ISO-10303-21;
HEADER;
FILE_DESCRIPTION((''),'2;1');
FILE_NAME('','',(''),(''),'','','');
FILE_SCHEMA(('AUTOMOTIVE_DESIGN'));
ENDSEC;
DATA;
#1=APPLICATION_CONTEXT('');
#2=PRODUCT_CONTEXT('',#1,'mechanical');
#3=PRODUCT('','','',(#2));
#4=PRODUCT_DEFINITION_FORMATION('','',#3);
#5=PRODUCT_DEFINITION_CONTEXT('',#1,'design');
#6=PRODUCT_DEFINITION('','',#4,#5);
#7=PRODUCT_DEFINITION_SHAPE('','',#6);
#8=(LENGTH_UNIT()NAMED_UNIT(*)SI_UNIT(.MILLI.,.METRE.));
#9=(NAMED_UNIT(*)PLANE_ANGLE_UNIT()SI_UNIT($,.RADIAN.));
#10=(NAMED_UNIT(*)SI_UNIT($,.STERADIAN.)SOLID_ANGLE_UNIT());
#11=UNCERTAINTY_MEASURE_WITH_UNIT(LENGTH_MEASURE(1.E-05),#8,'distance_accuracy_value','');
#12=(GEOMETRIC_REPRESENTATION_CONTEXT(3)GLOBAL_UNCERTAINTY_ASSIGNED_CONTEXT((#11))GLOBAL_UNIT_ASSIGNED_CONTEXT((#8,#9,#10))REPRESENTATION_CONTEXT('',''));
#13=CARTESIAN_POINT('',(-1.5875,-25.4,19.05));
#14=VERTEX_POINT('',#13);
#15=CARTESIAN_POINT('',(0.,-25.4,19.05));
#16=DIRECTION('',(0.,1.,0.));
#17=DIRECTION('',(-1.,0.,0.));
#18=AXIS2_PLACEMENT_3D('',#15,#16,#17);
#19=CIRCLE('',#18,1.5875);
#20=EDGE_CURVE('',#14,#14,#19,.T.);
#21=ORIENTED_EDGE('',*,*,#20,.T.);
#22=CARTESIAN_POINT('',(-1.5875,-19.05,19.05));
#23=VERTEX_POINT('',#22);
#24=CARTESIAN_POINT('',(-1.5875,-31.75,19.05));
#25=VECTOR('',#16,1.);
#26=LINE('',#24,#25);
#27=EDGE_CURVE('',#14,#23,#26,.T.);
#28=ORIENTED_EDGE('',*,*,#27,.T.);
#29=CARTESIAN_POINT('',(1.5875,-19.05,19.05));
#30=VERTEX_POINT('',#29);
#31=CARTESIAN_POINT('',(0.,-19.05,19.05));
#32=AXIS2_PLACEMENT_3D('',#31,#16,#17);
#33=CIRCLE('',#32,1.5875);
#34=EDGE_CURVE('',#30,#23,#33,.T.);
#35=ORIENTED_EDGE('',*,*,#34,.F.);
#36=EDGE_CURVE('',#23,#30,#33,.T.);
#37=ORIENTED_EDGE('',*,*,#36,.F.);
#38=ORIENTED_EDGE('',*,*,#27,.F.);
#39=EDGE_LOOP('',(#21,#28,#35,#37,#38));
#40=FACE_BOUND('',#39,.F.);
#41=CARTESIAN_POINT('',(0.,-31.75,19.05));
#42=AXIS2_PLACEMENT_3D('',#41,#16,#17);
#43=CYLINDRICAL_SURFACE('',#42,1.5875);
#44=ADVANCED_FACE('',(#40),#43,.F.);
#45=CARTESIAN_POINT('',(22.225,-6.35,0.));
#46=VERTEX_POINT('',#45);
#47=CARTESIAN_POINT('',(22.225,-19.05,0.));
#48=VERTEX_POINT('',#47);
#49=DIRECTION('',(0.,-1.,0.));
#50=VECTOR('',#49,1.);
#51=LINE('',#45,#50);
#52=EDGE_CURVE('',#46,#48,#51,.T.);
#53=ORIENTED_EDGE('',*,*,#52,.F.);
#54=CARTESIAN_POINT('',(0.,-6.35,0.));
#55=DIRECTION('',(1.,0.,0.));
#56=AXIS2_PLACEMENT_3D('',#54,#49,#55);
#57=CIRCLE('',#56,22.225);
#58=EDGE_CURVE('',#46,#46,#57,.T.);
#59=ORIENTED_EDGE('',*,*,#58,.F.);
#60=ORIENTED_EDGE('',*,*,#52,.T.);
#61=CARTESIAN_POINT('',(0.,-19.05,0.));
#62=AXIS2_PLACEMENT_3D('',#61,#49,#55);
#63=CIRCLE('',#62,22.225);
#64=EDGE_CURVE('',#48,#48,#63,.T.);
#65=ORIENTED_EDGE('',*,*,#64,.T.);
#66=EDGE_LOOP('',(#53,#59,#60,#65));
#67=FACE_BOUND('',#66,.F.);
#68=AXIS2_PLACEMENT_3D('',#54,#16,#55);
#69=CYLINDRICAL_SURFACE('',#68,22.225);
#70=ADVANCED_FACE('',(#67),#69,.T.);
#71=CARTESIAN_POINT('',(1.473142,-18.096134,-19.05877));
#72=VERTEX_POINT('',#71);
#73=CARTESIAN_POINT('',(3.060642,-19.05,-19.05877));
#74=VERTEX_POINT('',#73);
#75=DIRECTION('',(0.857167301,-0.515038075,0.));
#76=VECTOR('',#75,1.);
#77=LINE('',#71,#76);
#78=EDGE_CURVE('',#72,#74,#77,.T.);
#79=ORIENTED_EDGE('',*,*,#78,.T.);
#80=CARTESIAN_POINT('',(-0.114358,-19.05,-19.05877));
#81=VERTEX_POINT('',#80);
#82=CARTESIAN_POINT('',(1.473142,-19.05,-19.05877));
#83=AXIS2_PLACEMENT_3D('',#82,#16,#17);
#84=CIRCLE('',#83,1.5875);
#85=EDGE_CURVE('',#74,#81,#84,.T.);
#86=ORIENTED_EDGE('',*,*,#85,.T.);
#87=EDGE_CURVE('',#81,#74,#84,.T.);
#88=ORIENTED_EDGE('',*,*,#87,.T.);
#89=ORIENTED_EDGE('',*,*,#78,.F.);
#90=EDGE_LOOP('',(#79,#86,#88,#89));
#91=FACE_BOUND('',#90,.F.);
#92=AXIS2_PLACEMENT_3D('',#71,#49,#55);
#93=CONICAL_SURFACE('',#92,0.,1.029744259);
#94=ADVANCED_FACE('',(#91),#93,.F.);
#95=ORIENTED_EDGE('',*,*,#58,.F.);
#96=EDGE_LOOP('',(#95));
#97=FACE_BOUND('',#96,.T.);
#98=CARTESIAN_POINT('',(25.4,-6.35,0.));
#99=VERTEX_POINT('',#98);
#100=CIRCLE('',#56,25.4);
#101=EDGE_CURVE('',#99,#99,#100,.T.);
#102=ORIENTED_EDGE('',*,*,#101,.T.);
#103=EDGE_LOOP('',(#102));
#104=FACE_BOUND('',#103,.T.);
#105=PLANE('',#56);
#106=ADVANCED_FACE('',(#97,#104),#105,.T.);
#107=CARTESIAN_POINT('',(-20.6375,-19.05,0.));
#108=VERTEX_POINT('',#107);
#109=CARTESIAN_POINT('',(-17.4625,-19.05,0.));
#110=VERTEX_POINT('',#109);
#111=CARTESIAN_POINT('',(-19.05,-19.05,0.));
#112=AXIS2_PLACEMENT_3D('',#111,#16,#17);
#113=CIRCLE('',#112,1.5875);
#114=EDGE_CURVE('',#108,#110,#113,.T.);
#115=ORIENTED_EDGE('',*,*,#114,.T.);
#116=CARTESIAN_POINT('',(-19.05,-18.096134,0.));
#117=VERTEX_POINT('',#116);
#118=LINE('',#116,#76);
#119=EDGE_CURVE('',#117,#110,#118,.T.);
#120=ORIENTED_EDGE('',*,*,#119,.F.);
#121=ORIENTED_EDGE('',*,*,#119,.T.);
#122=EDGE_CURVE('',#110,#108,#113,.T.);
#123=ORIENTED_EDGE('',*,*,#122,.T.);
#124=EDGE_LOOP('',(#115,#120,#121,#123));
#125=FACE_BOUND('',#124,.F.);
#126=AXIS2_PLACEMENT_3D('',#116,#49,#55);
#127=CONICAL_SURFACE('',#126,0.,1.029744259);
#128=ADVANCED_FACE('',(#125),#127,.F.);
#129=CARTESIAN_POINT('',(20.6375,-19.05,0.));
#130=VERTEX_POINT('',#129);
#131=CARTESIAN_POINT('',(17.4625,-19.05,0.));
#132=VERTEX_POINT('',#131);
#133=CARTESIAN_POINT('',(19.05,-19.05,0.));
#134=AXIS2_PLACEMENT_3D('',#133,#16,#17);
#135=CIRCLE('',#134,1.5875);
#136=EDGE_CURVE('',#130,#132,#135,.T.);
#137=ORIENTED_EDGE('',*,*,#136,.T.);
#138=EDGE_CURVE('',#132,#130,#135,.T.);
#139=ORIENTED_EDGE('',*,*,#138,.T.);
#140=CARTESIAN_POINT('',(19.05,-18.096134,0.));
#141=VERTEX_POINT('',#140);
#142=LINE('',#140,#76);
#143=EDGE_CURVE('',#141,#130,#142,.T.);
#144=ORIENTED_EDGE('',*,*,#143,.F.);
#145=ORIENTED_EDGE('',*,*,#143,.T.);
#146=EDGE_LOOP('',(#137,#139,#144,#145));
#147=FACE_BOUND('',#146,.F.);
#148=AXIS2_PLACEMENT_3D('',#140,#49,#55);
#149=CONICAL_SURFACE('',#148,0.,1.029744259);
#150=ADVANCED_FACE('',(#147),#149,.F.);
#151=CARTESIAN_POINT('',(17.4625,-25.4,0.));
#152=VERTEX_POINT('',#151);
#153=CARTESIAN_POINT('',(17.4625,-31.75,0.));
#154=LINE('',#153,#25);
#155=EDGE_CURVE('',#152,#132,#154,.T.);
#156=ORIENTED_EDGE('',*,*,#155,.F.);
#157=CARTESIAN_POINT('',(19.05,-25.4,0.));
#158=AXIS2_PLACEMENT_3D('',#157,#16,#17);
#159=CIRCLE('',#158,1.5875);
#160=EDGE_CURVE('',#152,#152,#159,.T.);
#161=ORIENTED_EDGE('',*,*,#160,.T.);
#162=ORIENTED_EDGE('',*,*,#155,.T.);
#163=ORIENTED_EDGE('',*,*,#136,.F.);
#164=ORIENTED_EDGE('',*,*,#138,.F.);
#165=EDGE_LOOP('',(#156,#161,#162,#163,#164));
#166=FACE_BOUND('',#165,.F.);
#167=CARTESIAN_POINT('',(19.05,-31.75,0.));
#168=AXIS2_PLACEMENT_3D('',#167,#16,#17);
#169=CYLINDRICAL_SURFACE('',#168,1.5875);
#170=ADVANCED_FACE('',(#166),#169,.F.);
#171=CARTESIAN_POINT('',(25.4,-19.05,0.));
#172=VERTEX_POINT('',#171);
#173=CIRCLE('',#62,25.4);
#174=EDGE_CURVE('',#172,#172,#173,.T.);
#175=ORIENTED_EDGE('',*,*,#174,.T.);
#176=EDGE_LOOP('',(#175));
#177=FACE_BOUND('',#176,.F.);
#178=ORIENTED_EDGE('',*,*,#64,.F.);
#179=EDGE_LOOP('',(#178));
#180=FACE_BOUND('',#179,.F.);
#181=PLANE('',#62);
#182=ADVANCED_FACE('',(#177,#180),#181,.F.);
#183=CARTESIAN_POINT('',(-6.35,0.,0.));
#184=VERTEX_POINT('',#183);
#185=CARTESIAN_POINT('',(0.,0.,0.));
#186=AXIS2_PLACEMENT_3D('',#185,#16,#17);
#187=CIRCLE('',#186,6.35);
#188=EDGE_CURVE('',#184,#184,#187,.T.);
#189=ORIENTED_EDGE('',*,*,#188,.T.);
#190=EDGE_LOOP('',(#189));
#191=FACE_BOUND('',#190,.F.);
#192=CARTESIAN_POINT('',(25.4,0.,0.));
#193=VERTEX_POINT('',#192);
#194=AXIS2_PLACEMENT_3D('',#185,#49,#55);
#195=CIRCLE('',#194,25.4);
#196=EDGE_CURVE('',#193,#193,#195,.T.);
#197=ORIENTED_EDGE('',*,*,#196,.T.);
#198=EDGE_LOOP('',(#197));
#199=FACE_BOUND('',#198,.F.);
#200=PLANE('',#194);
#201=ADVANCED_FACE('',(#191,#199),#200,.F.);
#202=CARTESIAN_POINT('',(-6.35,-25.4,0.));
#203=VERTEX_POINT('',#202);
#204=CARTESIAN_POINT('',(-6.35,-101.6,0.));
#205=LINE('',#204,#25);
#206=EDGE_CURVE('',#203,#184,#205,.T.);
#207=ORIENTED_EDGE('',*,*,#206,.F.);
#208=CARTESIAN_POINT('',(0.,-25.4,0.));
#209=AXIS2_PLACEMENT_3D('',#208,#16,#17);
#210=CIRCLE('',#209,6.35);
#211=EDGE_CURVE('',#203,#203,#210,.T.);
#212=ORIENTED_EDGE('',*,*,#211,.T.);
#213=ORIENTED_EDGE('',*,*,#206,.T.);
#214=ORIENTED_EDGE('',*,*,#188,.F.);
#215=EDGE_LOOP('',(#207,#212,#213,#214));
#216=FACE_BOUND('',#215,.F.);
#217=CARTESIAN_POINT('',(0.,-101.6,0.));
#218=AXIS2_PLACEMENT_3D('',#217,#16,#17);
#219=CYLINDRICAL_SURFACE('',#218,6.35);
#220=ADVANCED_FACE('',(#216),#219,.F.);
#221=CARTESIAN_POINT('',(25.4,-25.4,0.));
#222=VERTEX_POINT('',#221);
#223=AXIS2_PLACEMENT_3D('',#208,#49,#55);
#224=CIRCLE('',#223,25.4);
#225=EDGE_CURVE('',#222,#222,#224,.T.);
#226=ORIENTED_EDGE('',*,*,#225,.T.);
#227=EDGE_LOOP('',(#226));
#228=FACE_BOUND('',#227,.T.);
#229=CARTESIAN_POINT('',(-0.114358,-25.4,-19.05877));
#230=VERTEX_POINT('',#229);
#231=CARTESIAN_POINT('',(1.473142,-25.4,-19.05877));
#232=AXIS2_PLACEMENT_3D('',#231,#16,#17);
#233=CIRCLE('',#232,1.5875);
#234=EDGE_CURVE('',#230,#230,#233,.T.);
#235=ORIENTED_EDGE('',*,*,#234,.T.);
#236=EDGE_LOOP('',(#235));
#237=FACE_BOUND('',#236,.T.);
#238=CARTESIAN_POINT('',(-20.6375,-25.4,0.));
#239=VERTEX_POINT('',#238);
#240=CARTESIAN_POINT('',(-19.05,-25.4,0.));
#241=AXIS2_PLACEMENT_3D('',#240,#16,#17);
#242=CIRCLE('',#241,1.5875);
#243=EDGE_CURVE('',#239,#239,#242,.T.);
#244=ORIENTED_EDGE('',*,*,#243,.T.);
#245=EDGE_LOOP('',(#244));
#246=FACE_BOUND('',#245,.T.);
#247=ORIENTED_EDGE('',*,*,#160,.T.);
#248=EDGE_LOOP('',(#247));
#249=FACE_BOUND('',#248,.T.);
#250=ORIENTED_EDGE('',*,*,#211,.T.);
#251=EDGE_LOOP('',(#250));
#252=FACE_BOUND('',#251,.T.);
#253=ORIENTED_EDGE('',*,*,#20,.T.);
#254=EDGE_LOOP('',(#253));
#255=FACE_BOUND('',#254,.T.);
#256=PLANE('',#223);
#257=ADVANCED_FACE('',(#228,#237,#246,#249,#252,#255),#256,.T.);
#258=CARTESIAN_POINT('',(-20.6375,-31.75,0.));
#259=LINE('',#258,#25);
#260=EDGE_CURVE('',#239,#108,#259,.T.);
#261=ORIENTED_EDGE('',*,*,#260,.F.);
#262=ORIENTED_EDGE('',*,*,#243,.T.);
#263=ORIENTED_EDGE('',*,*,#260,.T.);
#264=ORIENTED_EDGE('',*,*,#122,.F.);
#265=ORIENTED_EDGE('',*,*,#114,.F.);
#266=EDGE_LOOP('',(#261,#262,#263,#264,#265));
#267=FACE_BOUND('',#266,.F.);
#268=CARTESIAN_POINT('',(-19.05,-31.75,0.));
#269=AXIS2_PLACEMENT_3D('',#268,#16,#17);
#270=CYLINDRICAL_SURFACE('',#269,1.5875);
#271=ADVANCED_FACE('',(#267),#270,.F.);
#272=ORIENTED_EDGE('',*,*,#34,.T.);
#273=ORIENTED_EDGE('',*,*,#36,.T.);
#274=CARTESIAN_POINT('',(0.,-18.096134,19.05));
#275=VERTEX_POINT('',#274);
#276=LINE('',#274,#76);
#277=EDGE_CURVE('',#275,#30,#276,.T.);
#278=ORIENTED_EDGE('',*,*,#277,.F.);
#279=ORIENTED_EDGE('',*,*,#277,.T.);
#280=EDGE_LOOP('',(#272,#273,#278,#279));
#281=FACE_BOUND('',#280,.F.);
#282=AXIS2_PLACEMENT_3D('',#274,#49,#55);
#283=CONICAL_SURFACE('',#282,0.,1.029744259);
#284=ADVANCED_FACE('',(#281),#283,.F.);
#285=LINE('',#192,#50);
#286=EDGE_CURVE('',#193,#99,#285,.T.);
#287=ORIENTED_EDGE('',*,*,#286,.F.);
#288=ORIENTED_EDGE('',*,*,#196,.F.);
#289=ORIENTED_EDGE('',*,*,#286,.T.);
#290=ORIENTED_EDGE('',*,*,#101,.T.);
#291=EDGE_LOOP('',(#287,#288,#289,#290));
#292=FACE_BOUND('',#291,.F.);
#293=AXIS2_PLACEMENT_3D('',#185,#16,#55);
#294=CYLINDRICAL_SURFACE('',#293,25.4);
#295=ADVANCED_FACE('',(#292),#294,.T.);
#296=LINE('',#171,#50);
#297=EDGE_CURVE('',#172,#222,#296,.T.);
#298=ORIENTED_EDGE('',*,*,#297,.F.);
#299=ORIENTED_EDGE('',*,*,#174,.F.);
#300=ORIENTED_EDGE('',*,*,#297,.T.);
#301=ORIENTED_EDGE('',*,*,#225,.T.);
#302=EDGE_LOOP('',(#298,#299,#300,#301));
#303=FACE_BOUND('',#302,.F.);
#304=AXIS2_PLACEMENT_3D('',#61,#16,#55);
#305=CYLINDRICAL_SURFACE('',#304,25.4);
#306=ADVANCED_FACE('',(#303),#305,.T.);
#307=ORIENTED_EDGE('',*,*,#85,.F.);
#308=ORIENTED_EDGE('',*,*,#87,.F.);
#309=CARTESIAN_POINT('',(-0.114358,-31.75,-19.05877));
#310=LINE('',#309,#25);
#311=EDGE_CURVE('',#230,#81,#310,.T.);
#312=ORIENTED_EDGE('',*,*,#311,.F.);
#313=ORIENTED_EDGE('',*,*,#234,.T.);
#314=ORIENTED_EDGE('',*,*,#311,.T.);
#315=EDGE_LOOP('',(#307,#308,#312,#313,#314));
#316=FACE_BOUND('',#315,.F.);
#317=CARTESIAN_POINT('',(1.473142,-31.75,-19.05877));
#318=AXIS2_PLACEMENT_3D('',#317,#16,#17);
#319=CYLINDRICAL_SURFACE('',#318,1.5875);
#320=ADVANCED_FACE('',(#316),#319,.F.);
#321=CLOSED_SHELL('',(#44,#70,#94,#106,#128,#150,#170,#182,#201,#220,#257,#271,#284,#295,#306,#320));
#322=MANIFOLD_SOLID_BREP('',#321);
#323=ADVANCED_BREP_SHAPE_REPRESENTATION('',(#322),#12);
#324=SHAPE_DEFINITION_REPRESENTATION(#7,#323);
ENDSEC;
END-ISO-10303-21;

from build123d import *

# Parameters (mm, degrees)
F0_R      = 25.4
F1_DEPTH  = 6.35
F2_R      = 22.225
F3_DEPTH  = 12.7
F4_R      = 25.4
F5_DEPTH  = 6.35
F6_R      = 1.5875
F6_R_2    = 6.35
F7_DEPTH  = 89
F9_D      = 12.7
F11_D     = 3.175
F11_DEPTH = 6.35
F11_TIP   = 0.9538662327
F13_D     = 3.175
F13_DEPTH = 6.35
F13_TIP   = 0.9538662327
F15_D     = 3.175
F15_DEPTH = 6.35
F15_TIP   = 0.9538662327
F17_D     = 3.175
F17_DEPTH = 6.35
F17_TIP   = 0.9538662327


# Not quite as in the source:
# - an extrude ends at something that could not be found from the text; its depth is read off the source's solid


with BuildPart() as f1:
    # F0 (on Front) → F1 (new body)
    with BuildSketch(Plane.XZ):
        Circle(F0_R)
    extrude(amount=F1_DEPTH)

    # F2 (on face) → F3 (join)
    with BuildSketch(Plane.XZ.offset(6.35)):
        Circle(F2_R)
    extrude(amount=F3_DEPTH)

    # F4 (on face) → F5 (join)
    with BuildSketch(Plane.XZ.offset(19.05)):
        Circle(F4_R)
    extrude(amount=F5_DEPTH)

    # F6 (on face) → F7 (cut, through all)
    with BuildSketch(Plane.XZ.offset(25.4)):
        with Locations((0, -20.6375)):
            Circle(F6_R)
        with Locations((20.6375, 0)):
            Circle(F6_R)
        with Locations((0, 20.6375)):
            Circle(F6_R)
        with Locations((-20.6375, 0)):
            Circle(F6_R)
        Circle(F6_R_2)
    extrude(amount=F7_DEPTH, mode=Mode.SUBTRACT)

    # F9 (through all)
    with Locations(Plane.XZ.offset(25.4)):
        with Locations((0, 0)):
            Hole(F9_D / 2)

    # F11
    with Locations(Plane.XZ.offset(25.4)):
        with Locations((19.05, 0)):
            Hole(F11_D / 2, depth=F11_DEPTH)
            with Locations((0, 0, -(F11_DEPTH + F11_TIP / 2))):  # 118° drill point
                Cone(0, F11_D / 2, F11_TIP, mode=Mode.SUBTRACT)

    # F13
    with Locations(Plane.XZ.offset(25.4)):
        with Locations((0, 19.05)):
            Hole(F13_D / 2, depth=F13_DEPTH)
            with Locations((0, 0, -(F13_DEPTH + F13_TIP / 2))):  # 118° drill point
                Cone(0, F13_D / 2, F13_TIP, mode=Mode.SUBTRACT)

    # F15
    with Locations(Plane.XZ.offset(25.4)):
        with Locations((-19.05, 0)):
            Hole(F15_D / 2, depth=F15_DEPTH)
            with Locations((0, 0, -(F15_DEPTH + F15_TIP / 2))):  # 118° drill point
                Cone(0, F15_D / 2, F15_TIP, mode=Mode.SUBTRACT)

    # F17
    with Locations(Plane.XZ.offset(25.4)):
        with Locations((1.4731416013, -19.0587695688)):
            Hole(F17_D / 2, depth=F17_DEPTH)
            with Locations((0, 0, -(F17_DEPTH + F17_TIP / 2))):  # 118° drill point
                Cone(0, F17_D / 2, F17_TIP, mode=Mode.SUBTRACT)


solid = f1.part
